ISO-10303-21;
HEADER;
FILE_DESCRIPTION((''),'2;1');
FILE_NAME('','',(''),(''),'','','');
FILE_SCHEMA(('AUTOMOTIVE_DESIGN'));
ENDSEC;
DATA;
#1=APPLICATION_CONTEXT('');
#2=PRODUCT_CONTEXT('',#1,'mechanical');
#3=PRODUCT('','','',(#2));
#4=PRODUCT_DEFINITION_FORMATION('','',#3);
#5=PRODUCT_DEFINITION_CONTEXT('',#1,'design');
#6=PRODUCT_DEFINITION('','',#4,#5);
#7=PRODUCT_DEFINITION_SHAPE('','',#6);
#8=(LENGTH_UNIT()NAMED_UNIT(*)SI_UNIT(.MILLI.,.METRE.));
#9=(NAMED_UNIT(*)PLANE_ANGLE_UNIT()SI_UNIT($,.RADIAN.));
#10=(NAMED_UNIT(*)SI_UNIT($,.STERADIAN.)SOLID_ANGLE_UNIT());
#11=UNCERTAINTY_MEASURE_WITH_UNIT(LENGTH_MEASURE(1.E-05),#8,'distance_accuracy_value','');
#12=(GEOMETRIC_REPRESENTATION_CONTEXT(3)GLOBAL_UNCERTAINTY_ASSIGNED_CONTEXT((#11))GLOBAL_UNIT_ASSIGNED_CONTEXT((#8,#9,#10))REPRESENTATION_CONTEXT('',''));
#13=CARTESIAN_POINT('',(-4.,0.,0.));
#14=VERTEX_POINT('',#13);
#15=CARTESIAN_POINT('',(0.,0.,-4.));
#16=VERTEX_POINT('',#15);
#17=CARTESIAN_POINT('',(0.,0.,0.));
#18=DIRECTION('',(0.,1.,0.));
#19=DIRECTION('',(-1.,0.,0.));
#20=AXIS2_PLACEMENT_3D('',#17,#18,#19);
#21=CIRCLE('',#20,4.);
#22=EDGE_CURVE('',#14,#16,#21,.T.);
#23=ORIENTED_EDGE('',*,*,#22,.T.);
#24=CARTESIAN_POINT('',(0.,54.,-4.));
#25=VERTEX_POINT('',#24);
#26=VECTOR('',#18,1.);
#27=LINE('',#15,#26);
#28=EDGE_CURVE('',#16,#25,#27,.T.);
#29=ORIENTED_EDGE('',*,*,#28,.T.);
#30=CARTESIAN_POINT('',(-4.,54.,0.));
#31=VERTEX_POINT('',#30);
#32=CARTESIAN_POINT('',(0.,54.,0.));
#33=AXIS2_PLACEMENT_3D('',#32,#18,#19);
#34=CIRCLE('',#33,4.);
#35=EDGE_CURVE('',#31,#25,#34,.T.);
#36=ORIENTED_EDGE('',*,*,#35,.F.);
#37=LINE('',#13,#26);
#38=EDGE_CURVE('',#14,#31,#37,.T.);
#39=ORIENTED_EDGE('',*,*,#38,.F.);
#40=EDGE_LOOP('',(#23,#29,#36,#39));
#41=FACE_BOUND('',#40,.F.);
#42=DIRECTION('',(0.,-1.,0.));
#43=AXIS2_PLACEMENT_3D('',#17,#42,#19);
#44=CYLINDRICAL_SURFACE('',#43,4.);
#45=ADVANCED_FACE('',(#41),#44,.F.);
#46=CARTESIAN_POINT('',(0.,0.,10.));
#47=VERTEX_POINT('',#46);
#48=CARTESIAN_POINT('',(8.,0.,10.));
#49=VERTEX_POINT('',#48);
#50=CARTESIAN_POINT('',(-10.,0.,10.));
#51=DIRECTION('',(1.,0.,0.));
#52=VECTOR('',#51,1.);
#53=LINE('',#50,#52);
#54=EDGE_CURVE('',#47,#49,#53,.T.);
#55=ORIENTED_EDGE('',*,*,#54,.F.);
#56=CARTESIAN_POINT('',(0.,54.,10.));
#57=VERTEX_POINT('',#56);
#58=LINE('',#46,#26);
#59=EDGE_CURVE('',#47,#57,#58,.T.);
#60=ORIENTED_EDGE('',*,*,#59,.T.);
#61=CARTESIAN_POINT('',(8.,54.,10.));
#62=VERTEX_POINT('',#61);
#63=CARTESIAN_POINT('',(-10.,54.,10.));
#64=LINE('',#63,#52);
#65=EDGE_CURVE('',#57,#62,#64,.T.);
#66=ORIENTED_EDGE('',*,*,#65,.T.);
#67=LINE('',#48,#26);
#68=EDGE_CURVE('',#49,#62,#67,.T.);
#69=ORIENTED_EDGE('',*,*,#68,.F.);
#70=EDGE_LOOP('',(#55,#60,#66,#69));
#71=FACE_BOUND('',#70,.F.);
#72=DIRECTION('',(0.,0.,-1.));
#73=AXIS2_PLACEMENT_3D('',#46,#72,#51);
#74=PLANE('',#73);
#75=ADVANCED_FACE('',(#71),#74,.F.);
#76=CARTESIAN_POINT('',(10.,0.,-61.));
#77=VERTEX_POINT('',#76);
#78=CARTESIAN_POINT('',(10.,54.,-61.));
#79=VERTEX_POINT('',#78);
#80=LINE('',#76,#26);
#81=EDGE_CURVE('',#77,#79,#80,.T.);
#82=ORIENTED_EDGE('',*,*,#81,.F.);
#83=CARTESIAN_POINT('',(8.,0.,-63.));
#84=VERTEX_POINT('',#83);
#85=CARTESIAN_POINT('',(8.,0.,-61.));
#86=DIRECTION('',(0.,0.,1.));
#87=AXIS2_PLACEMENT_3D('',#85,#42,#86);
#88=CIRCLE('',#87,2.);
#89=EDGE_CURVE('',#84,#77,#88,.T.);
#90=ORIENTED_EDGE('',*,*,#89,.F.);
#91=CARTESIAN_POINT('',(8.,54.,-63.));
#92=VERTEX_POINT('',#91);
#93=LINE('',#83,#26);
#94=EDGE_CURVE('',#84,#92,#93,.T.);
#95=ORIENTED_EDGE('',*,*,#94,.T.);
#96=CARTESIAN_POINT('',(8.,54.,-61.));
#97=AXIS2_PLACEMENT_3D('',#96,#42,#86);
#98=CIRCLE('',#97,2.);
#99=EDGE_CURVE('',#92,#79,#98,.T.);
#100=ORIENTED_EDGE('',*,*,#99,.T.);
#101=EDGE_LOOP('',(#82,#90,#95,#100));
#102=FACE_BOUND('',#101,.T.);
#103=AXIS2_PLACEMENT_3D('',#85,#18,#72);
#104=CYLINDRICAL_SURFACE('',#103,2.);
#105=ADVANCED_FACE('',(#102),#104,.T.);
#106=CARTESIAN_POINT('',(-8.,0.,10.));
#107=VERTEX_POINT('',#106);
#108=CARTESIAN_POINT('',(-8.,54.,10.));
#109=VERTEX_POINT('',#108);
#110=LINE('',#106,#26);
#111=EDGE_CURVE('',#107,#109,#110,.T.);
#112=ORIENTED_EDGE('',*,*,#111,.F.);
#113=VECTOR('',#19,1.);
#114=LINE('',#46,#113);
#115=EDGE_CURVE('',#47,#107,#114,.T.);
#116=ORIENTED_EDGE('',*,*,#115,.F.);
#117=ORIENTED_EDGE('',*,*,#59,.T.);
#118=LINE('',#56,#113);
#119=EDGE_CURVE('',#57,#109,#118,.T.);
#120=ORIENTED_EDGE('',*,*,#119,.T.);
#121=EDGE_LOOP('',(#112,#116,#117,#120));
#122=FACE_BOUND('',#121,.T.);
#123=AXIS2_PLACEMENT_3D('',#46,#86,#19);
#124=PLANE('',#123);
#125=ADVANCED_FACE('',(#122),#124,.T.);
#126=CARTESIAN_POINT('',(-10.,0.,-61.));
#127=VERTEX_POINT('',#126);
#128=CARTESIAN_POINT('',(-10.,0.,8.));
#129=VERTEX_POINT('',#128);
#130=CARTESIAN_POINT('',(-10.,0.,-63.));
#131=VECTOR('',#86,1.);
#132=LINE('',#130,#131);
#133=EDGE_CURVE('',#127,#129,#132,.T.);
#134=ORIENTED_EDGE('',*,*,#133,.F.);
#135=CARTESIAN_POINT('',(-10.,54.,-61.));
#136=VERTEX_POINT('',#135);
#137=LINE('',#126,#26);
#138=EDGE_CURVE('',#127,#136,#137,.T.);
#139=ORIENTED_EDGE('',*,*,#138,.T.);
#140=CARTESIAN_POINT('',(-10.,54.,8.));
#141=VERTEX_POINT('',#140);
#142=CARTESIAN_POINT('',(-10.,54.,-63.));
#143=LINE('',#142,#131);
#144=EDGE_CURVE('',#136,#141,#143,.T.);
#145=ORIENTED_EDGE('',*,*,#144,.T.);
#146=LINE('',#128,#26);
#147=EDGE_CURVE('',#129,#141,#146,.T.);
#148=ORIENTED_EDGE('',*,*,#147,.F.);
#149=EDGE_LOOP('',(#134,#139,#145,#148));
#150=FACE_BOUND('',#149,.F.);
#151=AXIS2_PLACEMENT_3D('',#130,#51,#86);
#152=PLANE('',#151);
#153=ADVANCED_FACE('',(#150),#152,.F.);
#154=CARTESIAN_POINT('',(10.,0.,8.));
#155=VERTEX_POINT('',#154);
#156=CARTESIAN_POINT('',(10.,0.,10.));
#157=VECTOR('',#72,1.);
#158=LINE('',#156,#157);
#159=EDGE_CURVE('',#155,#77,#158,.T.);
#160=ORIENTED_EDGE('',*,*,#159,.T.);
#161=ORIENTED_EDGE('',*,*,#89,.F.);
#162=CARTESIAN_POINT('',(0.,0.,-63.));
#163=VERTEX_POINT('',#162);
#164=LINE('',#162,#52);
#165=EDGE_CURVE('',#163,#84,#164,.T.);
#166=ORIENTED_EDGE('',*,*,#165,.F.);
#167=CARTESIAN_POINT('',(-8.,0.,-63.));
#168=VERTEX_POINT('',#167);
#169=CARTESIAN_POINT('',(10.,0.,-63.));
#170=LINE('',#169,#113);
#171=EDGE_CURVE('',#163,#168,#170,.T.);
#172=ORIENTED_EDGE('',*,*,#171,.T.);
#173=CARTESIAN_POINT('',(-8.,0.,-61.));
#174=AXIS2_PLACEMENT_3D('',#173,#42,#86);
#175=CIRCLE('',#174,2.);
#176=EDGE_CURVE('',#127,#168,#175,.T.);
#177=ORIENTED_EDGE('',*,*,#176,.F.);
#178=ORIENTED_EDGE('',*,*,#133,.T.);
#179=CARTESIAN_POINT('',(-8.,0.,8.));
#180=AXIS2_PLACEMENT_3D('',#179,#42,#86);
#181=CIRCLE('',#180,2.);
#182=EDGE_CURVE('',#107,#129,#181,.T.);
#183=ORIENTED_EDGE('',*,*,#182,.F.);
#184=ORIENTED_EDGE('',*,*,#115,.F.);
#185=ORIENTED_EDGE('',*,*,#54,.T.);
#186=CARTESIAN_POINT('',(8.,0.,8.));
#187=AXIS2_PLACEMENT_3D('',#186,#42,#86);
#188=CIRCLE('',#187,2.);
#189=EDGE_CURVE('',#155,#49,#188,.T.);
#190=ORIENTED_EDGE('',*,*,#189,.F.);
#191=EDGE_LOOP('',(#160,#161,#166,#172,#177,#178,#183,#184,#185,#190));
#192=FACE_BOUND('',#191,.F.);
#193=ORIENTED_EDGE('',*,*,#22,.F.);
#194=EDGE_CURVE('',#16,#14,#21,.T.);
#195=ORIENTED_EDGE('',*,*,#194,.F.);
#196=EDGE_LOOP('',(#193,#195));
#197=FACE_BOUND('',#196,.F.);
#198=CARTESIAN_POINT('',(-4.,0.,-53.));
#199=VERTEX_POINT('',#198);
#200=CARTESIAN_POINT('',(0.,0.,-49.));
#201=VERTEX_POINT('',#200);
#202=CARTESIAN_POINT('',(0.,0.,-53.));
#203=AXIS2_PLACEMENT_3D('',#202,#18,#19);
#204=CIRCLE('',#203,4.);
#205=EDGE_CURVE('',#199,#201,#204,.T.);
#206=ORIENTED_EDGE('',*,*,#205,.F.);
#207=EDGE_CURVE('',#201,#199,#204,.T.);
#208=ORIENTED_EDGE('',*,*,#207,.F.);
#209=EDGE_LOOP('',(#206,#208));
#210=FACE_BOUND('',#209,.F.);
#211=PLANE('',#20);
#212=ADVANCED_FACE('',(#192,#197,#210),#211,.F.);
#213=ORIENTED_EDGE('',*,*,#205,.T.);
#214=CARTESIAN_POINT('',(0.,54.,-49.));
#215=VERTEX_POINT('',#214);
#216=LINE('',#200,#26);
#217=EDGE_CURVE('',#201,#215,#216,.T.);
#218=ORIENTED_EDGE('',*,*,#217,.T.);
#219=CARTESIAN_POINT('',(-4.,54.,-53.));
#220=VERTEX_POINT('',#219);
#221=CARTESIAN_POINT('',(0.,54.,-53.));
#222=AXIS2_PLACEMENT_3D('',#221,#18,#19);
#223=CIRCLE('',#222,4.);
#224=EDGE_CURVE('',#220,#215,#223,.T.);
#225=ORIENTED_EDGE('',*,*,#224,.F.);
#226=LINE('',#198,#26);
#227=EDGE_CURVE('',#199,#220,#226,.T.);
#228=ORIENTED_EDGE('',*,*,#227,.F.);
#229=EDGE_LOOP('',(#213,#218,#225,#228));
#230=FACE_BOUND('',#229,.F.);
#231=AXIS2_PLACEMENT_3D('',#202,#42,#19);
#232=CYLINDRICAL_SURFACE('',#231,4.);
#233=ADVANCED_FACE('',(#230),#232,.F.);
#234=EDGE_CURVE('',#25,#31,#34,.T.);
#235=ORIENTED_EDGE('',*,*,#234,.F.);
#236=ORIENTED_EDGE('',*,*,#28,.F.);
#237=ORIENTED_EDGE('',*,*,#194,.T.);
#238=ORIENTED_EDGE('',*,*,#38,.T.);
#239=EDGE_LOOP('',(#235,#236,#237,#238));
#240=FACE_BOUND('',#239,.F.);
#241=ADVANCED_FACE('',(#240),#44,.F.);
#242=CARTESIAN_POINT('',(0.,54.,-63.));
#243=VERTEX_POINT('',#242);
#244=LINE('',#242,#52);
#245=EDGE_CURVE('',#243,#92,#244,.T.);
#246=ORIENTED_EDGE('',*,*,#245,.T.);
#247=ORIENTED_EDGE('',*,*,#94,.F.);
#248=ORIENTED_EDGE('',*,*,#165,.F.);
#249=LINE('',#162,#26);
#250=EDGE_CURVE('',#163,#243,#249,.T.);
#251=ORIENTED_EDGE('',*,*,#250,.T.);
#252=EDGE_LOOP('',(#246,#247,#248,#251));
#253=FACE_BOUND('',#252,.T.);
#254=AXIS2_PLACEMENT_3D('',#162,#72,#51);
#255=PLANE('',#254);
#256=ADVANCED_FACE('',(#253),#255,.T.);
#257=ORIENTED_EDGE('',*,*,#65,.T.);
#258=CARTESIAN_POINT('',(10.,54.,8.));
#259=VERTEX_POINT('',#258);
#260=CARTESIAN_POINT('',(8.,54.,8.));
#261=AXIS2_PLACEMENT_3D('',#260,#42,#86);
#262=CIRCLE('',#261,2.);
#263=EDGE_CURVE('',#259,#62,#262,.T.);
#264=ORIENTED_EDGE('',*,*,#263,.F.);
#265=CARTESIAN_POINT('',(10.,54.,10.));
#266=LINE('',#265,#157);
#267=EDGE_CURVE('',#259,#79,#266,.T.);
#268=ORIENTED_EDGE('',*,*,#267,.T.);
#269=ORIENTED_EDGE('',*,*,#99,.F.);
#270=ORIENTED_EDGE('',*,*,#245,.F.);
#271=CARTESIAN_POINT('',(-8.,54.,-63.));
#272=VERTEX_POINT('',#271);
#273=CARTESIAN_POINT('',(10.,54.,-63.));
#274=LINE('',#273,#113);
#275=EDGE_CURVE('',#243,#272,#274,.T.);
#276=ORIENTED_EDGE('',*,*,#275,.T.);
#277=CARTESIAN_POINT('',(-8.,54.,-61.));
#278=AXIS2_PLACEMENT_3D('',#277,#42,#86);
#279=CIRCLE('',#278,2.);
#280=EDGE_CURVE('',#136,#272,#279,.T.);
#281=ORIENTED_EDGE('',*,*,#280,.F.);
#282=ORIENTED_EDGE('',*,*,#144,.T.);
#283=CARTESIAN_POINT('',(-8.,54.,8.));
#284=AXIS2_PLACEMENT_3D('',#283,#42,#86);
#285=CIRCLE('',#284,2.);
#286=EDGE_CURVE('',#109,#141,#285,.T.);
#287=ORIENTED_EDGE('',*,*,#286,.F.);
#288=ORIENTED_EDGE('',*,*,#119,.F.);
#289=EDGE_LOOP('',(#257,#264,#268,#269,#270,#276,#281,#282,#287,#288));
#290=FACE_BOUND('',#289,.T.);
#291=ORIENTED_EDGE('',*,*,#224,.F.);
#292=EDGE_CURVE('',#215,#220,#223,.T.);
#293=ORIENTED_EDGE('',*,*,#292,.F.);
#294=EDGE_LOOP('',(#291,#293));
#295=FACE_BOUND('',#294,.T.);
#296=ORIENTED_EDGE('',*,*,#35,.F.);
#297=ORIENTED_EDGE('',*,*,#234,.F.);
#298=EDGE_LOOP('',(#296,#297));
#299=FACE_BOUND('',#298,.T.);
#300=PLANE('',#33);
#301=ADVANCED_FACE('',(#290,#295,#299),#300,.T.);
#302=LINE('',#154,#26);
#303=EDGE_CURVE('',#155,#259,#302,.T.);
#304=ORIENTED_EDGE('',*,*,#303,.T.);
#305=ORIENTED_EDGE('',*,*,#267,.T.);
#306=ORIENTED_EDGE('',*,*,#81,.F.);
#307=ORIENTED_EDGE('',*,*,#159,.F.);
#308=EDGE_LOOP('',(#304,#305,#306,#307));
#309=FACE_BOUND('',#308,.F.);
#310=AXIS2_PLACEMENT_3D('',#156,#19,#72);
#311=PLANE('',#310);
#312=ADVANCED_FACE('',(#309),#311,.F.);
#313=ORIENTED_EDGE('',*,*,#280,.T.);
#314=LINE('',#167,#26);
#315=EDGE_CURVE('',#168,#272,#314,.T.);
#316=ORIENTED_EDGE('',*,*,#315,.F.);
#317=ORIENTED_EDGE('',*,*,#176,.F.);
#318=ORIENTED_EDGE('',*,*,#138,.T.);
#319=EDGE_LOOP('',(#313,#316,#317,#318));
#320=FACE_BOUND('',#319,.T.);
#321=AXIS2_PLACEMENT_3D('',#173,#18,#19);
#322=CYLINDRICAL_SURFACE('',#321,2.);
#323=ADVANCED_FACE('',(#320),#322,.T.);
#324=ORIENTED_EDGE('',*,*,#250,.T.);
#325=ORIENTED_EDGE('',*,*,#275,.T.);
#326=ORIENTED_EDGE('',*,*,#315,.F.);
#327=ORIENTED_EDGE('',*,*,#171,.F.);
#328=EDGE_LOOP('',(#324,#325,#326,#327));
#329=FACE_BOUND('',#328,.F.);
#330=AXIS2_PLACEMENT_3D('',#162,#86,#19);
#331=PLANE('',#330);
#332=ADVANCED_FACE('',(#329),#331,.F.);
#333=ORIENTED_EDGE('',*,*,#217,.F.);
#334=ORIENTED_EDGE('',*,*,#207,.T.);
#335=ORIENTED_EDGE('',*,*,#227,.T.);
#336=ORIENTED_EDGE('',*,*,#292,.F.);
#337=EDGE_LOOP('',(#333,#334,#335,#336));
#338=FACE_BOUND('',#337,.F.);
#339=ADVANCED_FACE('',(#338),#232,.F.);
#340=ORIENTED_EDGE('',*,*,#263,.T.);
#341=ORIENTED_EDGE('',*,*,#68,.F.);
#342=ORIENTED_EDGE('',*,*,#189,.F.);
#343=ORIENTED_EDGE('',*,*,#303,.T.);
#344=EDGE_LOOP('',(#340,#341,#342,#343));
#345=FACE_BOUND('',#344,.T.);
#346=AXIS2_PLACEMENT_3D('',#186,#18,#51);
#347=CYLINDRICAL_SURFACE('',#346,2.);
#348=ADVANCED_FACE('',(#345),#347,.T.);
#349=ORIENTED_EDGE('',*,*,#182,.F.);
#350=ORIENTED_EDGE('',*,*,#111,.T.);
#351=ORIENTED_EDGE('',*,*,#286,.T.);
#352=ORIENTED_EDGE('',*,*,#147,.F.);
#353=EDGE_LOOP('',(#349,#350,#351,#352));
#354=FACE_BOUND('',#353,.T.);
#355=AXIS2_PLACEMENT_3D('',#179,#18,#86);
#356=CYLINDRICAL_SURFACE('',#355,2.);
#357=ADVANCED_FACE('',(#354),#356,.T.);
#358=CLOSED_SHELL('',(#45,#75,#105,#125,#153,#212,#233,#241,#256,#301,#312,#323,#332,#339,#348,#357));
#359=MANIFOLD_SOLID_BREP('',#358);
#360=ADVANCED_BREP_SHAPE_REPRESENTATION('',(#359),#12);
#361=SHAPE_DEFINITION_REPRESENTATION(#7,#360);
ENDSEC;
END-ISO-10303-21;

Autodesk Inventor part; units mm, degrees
ref_plane "YZ Plane" through (0, 0, 0) normal (1, 0, 0) x (0, 1, 0)
ref_plane "XZ Plane" through (0, 0, 0) normal (0, 1, 0) x (-1, 0, 0)
ref_plane "XY Plane" through (0, 0, 0) normal (0, 0, 1) x (1, 0, 0)
sketch "Sketch1" plane through (0, 0, 0) normal (0, 1, 0) x (-1, 0, 0)
  line L0 (0, 0) -> (0, -53)
  circle A0 centre (0, 0) radius 4
  circle A1 centre (0, -53) radius 4
  line L1 (0, 10) -> (10, 10)
  line L2 (0, -63) -> (-10, -63)
  line L3 (10, 10) -> (-10, 10)
  line L4 (-10, 10) -> (-10, -63)
  line L5 (-10, -63) -> (10, -63)
  line L6 (10, -63) -> (10, 10)
  dimension "d0" = 53
  dimension "d1" = 8
  dimension "d2" = 8
  dimension "d3" = 10
  dimension "d4" = 10
  dimension "d5" = 10
  dimension "d6" = 10
  dimension "d8" = 10
  dimension "d9" = 10
  dimension "d10" = 73
extrude "Extrusion1" add sketch "Sketch1" along normal blind 54
fillet "Fillet1" radius 2 4 edges at (10, 27, 10) (-10, 27, 10) (10, 27, -63) (-10, 27, -63)
properties part number "Bearing Seats"
